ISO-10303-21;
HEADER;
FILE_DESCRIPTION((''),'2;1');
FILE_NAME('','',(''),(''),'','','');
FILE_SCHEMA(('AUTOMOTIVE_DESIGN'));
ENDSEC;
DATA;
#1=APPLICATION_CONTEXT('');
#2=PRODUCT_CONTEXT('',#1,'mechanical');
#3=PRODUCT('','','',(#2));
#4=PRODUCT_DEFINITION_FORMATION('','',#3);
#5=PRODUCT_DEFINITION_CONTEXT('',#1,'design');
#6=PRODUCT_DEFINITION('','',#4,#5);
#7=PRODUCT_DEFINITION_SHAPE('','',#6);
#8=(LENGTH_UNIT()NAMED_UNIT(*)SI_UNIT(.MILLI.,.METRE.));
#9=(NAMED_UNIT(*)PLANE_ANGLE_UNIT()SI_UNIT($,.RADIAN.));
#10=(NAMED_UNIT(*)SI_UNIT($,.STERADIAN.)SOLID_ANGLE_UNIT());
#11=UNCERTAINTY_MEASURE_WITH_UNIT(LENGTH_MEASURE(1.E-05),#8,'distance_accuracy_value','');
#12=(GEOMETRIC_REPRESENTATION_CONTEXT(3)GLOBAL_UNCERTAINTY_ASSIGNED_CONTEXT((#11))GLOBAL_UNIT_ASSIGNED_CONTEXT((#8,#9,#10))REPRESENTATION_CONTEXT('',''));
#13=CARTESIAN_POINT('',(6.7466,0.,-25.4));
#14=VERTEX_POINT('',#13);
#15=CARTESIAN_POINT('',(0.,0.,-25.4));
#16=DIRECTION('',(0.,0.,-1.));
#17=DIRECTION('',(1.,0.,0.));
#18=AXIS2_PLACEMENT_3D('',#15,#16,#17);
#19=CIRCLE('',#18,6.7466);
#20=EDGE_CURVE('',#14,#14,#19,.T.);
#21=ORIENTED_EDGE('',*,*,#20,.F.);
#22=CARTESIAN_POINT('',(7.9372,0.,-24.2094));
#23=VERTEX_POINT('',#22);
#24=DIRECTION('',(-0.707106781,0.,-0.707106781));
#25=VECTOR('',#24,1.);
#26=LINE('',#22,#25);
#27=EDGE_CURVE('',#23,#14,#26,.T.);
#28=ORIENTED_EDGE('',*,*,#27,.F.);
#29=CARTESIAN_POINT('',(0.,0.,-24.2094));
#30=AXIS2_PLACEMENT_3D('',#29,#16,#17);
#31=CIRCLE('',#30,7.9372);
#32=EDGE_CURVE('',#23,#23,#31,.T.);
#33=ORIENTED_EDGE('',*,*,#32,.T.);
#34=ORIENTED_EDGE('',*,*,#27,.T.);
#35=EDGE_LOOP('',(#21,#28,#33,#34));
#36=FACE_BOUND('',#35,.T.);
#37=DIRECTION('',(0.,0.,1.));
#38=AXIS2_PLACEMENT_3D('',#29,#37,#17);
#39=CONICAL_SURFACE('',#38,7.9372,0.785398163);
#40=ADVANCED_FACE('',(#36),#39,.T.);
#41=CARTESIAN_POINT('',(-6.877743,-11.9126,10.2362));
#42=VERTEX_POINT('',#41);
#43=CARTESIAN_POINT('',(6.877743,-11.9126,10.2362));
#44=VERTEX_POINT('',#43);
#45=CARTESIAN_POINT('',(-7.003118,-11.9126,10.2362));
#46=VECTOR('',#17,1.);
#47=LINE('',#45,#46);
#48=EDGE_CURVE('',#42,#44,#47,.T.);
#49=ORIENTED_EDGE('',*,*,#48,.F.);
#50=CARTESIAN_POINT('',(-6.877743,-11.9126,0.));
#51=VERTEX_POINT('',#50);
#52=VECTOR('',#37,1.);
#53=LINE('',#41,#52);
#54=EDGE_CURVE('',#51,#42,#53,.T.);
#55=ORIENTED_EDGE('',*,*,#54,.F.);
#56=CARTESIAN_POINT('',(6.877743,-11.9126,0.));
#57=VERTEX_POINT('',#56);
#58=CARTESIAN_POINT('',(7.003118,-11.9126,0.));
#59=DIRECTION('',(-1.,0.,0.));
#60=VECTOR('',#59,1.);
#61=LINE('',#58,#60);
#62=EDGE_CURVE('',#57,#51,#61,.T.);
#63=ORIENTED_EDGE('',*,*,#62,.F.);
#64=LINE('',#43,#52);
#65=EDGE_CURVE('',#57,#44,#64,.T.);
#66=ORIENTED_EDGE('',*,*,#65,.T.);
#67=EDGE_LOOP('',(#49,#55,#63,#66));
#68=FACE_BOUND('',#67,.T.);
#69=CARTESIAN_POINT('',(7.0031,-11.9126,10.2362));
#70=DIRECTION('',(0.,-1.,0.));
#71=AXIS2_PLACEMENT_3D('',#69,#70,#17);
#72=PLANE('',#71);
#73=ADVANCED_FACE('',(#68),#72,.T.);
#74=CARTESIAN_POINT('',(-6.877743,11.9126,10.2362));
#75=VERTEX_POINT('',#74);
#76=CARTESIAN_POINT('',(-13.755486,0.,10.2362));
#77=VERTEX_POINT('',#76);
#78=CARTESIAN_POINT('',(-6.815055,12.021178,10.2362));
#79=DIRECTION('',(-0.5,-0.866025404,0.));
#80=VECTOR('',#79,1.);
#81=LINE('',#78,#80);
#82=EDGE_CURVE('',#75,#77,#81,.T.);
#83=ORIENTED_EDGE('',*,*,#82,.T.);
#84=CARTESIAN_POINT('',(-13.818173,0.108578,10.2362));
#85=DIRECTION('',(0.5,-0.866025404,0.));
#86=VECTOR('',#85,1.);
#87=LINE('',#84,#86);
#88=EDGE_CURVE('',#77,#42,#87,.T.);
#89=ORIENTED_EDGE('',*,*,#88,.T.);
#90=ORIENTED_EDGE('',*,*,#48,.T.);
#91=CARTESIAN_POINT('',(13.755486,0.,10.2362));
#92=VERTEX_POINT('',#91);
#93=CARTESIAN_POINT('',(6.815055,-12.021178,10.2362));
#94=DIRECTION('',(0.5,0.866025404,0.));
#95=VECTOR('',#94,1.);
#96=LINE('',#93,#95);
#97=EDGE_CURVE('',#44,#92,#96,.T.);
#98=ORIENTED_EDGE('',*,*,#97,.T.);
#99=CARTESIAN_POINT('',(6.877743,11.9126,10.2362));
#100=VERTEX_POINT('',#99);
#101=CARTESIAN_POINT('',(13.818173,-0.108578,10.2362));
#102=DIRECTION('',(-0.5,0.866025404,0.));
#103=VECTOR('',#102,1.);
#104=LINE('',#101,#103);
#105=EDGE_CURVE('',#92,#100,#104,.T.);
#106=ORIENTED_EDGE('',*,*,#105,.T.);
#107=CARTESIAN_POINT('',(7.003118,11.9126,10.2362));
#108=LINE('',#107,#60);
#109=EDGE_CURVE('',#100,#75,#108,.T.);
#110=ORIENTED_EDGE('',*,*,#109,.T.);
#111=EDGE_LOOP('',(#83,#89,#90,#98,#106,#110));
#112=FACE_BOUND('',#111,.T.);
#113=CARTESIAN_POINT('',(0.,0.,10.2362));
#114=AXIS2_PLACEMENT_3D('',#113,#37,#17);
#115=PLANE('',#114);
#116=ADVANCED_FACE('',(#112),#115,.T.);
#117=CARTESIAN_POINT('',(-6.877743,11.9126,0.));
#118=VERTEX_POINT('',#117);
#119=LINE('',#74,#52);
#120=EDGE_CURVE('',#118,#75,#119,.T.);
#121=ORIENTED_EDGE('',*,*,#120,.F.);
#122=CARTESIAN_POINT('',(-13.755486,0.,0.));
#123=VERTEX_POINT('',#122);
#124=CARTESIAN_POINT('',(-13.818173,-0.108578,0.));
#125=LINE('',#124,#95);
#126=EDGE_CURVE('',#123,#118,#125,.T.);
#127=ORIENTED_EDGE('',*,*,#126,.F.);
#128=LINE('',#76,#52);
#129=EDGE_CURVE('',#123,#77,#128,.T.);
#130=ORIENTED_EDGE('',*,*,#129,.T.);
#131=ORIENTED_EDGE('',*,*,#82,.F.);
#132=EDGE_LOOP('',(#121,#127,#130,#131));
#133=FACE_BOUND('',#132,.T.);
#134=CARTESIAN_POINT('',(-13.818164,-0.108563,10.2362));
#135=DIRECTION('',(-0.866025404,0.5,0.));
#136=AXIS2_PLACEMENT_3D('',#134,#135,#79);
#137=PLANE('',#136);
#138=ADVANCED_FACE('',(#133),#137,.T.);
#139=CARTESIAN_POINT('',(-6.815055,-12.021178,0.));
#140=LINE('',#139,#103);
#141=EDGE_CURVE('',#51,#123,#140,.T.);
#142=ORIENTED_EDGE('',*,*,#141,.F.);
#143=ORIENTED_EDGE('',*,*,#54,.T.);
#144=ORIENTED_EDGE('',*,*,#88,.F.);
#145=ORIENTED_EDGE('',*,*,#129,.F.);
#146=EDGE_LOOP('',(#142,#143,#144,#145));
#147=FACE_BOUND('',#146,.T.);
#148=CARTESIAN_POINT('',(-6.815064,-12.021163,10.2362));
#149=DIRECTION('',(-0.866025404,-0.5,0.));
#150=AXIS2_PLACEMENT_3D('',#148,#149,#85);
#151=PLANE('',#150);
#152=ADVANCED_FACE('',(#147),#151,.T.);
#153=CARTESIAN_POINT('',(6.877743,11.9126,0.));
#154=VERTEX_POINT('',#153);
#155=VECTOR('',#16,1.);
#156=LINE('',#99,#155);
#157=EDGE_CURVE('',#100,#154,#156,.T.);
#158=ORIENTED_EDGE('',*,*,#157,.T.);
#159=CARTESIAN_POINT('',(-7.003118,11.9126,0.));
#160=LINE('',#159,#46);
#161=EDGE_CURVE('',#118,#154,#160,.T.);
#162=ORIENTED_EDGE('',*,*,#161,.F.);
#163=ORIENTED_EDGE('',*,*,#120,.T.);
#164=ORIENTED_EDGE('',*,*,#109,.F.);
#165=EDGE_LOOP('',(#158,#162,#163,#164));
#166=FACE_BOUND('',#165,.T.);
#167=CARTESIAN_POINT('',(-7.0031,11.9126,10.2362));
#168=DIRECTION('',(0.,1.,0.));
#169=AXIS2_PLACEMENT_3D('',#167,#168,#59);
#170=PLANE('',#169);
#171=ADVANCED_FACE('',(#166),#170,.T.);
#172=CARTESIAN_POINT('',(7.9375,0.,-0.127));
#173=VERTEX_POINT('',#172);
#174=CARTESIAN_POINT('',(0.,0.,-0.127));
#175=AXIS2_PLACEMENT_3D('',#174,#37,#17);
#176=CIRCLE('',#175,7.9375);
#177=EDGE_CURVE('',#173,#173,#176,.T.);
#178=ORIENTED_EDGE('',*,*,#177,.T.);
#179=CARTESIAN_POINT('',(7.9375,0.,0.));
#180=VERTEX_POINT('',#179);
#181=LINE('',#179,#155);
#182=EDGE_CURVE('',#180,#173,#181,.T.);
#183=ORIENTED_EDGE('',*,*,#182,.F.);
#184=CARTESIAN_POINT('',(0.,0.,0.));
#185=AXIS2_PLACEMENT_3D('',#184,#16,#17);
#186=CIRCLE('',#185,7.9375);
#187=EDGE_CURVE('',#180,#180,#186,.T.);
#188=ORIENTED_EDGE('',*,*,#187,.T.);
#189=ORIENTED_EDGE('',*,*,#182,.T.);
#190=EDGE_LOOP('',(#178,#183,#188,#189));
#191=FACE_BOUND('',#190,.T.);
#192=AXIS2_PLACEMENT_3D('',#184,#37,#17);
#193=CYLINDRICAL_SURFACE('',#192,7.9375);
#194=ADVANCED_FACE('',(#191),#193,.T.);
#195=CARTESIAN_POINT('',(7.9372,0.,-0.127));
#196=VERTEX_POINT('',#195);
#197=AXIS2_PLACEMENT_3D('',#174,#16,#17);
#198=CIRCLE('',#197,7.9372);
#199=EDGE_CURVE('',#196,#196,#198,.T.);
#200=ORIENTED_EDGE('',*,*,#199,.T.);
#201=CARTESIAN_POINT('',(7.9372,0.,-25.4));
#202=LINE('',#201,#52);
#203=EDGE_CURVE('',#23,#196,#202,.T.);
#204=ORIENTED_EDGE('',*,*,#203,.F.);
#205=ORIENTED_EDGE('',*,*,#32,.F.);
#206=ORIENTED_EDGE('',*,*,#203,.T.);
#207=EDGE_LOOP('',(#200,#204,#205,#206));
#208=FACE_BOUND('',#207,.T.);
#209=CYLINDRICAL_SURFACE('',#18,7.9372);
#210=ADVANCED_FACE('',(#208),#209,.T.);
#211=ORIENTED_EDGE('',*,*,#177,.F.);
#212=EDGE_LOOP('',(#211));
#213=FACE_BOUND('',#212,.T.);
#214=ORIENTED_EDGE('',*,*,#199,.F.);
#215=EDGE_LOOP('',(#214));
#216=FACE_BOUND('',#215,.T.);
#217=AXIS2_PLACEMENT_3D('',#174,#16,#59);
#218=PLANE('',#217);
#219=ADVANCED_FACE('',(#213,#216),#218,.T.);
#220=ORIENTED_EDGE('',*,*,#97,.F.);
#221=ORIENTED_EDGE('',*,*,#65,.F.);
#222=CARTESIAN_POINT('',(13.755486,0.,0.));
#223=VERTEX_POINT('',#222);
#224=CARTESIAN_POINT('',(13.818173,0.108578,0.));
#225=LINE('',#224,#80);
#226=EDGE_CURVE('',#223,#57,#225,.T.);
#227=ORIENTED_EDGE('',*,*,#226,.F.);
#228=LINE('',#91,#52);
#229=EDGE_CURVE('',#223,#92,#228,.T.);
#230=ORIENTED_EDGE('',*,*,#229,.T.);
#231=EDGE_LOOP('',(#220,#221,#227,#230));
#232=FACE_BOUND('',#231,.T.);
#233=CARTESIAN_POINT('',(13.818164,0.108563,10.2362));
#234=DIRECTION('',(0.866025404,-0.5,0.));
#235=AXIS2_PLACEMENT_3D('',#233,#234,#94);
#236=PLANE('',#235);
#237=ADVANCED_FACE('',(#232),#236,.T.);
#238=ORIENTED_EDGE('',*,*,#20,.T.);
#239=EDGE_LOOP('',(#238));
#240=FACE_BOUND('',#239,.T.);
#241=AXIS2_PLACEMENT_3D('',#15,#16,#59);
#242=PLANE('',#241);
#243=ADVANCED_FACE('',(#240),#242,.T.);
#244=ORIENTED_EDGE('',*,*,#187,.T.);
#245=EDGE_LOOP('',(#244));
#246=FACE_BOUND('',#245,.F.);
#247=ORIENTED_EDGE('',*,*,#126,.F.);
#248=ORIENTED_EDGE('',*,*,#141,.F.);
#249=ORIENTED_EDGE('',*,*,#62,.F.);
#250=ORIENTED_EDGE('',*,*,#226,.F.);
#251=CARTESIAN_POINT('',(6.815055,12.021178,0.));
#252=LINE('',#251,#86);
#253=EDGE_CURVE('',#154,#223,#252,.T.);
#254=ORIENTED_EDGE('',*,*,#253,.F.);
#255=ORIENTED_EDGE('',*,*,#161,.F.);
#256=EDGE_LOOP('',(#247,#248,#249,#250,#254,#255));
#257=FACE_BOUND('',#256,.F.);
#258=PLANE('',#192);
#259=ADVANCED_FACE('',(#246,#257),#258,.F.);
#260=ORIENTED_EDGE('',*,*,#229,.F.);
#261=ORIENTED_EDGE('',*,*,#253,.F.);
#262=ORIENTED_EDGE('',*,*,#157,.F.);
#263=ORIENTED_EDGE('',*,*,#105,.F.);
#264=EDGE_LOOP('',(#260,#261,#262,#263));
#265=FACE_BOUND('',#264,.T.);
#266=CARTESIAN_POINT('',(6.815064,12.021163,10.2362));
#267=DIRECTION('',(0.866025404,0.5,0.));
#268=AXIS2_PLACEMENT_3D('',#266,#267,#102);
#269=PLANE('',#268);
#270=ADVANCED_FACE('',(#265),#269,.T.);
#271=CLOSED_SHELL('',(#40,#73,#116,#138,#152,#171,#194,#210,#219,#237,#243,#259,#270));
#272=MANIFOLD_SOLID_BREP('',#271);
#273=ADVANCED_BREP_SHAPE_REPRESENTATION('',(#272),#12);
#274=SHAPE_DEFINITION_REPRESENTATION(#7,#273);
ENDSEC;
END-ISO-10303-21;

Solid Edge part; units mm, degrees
sketch "Sketch1" plane through (0, 0, 0) normal (0, 0, 1) x (1, 0, 0)
  circle A0 centre (0, 0) radius 13.8186
  dimension "D1" = 27.6372
extrude "Protrusion1" add sketch "Sketch1" along normal blind 10.2362
sketch "Sketch2" plane through (0, 0, 0) normal (0, 0, -1) x (1, 0, 0)
  circle A0 centre (0, 0) radius 7.9375
extrude "Protrusion2" add sketch "Sketch2" along normal blind 25.4
sketch "Sketch3" plane through (0, 0, -25.4) normal (0, 0, -1) x (1, 0, 0)
  circle A0 centre (0, 0) radius 7.9372
extrude "Cutout1" cut sketch "Sketch3" against normal blind 25.273 flip side to cut
chamfer "Chamfer_1" distance 1.1906 angle 45 1 edges at (-7.9372, 0, -25.4)
sketch "Sketch4" plane through (0, 0, 10.2362) normal (0, 0, 1) x (1, 0, 0)
  line L0 (-7.0031, 11.9126) -> (7.0031, 11.9126)
  dimension "D1" = 23.8252
extrude "Cutout2" cut sketch "Sketch4" against normal up to next material side at (0, 11.9626, 10.2362)
pattern_circular "Pattern1" count 6 over 360 about axis through (0, 0, 10.2362) along (0, 0, 1) of "Cutout2"
properties part number "24100038"
